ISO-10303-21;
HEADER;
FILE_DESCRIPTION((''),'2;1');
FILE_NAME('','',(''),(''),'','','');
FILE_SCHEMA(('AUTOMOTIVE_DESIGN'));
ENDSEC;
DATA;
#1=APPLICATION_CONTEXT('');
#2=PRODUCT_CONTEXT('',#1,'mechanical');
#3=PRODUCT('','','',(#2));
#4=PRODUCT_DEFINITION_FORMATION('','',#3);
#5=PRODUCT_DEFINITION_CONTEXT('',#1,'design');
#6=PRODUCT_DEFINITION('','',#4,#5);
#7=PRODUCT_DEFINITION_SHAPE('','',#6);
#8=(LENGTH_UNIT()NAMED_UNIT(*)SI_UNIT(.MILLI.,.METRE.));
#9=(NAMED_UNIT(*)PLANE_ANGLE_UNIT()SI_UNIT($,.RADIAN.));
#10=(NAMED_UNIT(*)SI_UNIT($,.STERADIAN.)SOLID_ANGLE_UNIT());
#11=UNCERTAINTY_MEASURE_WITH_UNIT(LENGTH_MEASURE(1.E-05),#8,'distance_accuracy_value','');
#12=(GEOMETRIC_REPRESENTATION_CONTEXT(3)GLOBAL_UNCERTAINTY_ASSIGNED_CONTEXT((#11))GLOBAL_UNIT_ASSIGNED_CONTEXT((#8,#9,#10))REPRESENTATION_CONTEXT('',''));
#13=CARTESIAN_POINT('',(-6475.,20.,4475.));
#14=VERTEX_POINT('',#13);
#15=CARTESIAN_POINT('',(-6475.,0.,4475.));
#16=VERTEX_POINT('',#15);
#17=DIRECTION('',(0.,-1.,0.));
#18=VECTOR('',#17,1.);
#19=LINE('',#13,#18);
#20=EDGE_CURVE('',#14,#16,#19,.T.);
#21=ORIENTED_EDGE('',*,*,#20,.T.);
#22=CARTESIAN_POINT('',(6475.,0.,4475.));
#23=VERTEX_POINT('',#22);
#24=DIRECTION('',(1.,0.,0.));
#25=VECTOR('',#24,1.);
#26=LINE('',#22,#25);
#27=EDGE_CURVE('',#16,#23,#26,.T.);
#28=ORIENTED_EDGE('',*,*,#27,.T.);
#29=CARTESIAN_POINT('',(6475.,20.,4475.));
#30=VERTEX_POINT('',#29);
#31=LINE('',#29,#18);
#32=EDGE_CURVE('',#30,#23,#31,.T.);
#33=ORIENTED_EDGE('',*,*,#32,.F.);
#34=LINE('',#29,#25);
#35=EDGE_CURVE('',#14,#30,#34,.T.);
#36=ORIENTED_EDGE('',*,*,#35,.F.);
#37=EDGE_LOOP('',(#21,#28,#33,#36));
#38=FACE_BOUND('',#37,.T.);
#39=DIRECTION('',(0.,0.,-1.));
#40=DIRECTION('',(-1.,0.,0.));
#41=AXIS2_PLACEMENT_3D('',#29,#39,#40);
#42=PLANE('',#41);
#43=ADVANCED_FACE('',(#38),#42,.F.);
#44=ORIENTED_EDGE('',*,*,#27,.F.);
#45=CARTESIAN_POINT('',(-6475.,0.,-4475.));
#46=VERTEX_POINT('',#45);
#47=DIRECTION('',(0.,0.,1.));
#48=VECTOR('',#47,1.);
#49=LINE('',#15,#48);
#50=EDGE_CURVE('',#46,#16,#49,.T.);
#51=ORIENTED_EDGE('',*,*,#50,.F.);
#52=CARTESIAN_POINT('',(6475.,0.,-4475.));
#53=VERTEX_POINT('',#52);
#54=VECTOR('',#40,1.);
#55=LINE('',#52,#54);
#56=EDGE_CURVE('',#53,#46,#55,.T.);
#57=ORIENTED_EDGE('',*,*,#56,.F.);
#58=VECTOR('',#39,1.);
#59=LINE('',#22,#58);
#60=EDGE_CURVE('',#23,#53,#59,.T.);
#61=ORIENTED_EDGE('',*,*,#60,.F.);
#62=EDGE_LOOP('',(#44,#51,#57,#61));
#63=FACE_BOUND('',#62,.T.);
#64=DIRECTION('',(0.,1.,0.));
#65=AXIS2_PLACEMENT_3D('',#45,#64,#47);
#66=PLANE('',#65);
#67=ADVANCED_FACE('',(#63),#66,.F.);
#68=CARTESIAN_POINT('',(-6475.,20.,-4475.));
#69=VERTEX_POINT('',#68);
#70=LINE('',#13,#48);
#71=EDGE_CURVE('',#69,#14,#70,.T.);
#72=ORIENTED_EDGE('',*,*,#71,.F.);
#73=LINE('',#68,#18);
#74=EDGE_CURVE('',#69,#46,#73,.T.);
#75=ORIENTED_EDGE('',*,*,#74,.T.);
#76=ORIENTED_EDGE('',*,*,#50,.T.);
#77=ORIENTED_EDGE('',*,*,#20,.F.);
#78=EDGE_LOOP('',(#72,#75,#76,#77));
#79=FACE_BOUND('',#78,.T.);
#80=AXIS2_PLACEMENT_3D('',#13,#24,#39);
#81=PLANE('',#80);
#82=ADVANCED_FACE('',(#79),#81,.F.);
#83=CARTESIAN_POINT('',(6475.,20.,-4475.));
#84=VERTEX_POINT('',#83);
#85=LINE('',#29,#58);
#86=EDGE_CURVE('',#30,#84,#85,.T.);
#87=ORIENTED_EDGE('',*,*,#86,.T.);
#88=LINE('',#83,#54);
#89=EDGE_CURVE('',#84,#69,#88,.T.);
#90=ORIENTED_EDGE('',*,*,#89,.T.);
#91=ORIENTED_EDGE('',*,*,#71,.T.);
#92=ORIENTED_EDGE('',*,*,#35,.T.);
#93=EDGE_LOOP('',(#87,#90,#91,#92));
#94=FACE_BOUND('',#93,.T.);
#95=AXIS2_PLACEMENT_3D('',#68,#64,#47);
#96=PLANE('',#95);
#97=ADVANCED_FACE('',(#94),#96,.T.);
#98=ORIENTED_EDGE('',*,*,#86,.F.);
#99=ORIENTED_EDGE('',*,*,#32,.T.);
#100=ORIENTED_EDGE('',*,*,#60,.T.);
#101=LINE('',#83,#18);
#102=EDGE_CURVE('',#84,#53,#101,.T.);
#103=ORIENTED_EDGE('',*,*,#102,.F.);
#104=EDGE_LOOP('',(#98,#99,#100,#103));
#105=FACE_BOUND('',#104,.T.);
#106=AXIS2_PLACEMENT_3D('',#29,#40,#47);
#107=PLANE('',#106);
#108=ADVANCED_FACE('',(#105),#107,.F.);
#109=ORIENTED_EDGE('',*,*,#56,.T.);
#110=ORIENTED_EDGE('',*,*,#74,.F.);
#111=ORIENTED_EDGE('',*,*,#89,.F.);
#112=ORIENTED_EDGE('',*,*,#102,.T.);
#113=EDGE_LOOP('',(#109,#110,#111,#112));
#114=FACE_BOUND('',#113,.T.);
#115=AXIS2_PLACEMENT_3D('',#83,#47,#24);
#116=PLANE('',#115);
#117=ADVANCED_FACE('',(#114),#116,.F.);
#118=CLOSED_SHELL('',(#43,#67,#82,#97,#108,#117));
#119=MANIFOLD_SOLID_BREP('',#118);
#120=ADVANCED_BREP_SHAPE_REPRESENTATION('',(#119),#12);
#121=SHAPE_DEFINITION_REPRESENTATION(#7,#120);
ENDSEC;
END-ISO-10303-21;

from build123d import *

# Parameters (mm, degrees)
SKETCH1_W          = 12950
SKETCH1_H          = 8950
BASE_FLANGE1_DEPTH = 20


# Sheet-metal steps are written as plain solids
with BuildPart() as part:
    # Sketch1 → Base-Flange1 (new body)
    with BuildSketch(Plane(origin=(0, 0, 0), x_dir=(1, 0, 0), z_dir=(0, 1, 0))):
        Rectangle(SKETCH1_W, SKETCH1_H)
    extrude(amount=BASE_FLANGE1_DEPTH)


solid = part.part
